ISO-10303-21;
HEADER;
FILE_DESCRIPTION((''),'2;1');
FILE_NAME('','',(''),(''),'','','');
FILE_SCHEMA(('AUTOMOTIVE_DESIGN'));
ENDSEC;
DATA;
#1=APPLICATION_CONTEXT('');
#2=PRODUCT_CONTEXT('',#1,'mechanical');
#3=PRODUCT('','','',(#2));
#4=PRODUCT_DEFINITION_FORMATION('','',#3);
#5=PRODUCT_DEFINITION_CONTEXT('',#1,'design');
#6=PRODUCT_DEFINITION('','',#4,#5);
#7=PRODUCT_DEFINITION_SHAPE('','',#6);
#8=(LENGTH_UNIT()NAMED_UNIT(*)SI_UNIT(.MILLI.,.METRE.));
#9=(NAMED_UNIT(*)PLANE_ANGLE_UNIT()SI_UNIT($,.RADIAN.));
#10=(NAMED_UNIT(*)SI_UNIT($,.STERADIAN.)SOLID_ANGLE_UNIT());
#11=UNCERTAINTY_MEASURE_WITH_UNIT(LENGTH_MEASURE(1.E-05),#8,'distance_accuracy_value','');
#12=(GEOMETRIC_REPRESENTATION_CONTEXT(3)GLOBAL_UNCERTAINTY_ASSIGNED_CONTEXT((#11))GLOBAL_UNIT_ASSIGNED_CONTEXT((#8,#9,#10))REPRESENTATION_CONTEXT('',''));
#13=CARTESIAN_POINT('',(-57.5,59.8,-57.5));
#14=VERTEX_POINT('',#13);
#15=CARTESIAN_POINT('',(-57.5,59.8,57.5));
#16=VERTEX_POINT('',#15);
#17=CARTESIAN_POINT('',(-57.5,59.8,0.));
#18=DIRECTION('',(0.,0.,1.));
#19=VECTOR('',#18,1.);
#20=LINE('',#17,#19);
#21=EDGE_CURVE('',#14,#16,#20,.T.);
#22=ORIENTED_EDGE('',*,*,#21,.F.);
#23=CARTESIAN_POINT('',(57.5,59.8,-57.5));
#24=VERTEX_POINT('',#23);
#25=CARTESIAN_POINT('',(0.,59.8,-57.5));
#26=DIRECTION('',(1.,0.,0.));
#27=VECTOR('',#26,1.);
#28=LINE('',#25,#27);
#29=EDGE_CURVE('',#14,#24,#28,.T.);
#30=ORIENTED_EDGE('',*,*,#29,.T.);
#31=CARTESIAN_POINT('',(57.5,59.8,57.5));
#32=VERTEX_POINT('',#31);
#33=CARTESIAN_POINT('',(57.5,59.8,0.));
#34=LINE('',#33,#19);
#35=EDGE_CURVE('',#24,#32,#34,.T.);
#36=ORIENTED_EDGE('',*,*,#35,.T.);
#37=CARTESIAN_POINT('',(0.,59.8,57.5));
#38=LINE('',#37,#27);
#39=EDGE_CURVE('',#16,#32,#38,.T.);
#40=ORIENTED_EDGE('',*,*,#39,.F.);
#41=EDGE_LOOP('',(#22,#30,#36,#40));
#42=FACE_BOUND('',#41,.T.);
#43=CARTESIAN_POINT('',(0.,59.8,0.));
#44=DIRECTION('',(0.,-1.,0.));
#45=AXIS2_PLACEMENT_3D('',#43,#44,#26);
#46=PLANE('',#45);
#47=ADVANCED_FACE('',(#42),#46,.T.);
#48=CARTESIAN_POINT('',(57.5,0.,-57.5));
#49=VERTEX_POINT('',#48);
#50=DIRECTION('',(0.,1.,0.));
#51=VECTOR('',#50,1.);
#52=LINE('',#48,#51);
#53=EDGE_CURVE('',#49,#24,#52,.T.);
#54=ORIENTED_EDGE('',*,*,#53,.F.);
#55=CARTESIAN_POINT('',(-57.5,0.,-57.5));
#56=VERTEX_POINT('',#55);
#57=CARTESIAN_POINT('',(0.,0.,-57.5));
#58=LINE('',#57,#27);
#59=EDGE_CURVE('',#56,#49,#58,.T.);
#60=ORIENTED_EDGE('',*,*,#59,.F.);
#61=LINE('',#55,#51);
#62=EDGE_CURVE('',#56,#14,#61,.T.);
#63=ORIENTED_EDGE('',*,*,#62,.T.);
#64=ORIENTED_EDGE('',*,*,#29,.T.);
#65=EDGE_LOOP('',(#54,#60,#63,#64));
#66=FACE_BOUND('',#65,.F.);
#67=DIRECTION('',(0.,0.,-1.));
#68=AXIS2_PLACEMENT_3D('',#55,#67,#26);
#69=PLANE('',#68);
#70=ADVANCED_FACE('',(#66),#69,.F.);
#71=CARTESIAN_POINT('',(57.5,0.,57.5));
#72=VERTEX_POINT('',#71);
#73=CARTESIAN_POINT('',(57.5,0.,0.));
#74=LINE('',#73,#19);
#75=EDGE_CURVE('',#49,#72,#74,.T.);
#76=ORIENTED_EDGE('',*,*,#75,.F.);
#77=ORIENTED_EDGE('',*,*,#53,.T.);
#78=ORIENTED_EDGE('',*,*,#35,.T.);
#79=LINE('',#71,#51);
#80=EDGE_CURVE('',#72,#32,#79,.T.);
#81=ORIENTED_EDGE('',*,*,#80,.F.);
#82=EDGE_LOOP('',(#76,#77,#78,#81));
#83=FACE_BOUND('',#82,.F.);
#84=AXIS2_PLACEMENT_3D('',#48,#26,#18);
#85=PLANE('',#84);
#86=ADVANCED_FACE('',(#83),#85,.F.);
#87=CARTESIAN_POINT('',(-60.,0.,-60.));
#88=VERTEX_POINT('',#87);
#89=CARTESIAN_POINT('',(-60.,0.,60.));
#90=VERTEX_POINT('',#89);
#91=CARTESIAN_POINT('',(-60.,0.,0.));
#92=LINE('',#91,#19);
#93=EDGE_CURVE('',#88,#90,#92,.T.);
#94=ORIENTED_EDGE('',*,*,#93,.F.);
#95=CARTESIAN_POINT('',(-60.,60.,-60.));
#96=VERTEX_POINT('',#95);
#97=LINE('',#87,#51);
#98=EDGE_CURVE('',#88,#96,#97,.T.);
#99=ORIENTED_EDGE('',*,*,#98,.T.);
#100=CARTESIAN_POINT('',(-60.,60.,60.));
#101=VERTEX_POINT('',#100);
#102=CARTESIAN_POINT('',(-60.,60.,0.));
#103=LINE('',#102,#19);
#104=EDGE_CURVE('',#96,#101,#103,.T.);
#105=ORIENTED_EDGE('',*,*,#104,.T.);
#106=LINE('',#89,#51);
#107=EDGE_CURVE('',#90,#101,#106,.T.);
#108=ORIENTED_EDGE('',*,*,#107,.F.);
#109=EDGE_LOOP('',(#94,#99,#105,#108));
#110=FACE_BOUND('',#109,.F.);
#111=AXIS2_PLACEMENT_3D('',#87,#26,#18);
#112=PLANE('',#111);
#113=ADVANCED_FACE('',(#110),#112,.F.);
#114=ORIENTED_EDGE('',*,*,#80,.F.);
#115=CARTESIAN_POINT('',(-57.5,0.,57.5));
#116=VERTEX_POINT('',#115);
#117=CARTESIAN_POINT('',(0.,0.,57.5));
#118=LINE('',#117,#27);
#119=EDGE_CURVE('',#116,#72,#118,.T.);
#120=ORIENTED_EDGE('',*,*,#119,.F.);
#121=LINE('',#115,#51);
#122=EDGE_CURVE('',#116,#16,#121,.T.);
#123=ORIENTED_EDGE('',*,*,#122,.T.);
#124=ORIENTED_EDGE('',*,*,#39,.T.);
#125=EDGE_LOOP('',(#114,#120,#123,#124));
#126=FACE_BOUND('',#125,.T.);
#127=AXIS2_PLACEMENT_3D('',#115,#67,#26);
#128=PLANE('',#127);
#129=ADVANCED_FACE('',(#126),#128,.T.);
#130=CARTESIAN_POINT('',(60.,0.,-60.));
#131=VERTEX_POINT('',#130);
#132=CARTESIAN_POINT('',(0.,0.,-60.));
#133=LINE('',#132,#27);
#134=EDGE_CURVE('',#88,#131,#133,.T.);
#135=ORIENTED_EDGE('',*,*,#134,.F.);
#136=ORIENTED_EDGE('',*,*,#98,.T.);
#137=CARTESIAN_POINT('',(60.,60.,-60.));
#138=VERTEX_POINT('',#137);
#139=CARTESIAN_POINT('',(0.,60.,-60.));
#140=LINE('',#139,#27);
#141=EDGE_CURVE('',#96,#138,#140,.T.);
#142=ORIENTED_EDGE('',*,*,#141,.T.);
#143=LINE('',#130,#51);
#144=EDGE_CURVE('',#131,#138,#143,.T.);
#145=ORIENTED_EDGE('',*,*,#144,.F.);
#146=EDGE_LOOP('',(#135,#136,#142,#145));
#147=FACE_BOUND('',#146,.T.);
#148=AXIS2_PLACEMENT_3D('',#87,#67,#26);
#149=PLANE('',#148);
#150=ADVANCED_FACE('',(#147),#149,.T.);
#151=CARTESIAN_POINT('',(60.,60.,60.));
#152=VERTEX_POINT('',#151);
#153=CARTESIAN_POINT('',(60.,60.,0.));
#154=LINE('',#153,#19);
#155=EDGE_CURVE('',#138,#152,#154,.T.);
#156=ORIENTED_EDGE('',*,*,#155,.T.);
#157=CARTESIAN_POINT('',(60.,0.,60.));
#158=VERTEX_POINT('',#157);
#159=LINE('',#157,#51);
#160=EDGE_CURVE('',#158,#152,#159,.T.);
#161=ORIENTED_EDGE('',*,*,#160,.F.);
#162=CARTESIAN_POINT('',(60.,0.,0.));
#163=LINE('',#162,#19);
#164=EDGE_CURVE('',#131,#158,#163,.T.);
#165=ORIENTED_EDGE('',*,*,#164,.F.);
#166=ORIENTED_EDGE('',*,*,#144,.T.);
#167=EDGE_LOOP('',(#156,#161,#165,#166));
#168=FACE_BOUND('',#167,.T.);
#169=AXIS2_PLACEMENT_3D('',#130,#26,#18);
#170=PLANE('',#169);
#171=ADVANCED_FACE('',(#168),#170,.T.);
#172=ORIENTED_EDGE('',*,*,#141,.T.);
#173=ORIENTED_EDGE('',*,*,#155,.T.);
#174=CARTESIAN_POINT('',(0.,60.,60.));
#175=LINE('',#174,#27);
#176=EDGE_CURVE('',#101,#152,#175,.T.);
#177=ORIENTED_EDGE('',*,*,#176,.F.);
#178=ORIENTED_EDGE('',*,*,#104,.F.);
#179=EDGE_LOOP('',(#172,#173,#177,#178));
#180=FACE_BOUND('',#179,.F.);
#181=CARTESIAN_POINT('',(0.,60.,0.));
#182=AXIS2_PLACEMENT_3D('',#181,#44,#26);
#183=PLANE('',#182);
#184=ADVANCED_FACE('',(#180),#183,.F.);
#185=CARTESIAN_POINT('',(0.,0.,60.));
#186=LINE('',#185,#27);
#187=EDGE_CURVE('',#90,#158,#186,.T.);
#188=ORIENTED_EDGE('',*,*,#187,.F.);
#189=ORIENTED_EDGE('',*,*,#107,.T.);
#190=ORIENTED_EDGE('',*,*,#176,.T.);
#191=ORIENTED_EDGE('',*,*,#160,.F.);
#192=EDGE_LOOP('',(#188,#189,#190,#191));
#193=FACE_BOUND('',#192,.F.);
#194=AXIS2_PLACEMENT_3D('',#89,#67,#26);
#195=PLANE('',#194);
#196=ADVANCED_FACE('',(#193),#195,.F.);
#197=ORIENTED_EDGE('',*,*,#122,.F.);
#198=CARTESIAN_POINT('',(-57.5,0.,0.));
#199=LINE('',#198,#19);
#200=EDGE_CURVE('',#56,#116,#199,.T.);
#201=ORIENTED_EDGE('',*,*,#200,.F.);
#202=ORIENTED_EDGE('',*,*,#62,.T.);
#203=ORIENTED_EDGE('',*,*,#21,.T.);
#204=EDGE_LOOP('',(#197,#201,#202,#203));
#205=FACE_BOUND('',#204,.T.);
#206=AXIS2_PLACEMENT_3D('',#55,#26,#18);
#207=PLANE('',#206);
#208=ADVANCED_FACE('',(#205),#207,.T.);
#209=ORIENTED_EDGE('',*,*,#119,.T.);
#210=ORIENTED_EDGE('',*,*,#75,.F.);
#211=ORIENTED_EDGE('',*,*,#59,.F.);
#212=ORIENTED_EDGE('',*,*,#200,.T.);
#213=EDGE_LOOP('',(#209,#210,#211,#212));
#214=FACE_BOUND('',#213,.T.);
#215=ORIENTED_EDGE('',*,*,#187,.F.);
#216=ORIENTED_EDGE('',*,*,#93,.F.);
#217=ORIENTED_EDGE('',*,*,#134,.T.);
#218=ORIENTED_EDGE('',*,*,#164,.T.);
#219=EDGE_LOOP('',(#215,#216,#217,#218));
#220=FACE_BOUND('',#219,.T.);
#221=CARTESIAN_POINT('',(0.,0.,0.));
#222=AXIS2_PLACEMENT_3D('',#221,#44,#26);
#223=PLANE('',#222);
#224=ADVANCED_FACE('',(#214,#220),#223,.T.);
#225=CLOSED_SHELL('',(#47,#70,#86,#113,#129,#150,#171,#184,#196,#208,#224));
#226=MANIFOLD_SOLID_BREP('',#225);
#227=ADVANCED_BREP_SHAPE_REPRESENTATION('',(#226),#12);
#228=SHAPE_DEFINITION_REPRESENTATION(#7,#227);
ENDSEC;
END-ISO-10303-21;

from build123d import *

# Parameters (mm, degrees)
F0_W     = 120
F0_H     = 120
F1_DEPTH = 60
F2_W     = 115
F2_H     = 115
F3_DEPTH = 59.8


# Not quite as in the source:
# - the program builds the solid bodies; features that only make, move or delete a surface that nothing else refers to are left out


with BuildPart() as f1:
    # F0 (on Front) → F1 (new body)
    with BuildSketch(Plane.XZ):
        Rectangle(F0_W, F0_H)
    extrude(amount=-F1_DEPTH)

    # F2 (on Front) → F3 (cut)
    with BuildSketch(Plane.XZ):
        Rectangle(F2_W, F2_H)
    extrude(amount=-F3_DEPTH, mode=Mode.SUBTRACT)


solid = f1.part
